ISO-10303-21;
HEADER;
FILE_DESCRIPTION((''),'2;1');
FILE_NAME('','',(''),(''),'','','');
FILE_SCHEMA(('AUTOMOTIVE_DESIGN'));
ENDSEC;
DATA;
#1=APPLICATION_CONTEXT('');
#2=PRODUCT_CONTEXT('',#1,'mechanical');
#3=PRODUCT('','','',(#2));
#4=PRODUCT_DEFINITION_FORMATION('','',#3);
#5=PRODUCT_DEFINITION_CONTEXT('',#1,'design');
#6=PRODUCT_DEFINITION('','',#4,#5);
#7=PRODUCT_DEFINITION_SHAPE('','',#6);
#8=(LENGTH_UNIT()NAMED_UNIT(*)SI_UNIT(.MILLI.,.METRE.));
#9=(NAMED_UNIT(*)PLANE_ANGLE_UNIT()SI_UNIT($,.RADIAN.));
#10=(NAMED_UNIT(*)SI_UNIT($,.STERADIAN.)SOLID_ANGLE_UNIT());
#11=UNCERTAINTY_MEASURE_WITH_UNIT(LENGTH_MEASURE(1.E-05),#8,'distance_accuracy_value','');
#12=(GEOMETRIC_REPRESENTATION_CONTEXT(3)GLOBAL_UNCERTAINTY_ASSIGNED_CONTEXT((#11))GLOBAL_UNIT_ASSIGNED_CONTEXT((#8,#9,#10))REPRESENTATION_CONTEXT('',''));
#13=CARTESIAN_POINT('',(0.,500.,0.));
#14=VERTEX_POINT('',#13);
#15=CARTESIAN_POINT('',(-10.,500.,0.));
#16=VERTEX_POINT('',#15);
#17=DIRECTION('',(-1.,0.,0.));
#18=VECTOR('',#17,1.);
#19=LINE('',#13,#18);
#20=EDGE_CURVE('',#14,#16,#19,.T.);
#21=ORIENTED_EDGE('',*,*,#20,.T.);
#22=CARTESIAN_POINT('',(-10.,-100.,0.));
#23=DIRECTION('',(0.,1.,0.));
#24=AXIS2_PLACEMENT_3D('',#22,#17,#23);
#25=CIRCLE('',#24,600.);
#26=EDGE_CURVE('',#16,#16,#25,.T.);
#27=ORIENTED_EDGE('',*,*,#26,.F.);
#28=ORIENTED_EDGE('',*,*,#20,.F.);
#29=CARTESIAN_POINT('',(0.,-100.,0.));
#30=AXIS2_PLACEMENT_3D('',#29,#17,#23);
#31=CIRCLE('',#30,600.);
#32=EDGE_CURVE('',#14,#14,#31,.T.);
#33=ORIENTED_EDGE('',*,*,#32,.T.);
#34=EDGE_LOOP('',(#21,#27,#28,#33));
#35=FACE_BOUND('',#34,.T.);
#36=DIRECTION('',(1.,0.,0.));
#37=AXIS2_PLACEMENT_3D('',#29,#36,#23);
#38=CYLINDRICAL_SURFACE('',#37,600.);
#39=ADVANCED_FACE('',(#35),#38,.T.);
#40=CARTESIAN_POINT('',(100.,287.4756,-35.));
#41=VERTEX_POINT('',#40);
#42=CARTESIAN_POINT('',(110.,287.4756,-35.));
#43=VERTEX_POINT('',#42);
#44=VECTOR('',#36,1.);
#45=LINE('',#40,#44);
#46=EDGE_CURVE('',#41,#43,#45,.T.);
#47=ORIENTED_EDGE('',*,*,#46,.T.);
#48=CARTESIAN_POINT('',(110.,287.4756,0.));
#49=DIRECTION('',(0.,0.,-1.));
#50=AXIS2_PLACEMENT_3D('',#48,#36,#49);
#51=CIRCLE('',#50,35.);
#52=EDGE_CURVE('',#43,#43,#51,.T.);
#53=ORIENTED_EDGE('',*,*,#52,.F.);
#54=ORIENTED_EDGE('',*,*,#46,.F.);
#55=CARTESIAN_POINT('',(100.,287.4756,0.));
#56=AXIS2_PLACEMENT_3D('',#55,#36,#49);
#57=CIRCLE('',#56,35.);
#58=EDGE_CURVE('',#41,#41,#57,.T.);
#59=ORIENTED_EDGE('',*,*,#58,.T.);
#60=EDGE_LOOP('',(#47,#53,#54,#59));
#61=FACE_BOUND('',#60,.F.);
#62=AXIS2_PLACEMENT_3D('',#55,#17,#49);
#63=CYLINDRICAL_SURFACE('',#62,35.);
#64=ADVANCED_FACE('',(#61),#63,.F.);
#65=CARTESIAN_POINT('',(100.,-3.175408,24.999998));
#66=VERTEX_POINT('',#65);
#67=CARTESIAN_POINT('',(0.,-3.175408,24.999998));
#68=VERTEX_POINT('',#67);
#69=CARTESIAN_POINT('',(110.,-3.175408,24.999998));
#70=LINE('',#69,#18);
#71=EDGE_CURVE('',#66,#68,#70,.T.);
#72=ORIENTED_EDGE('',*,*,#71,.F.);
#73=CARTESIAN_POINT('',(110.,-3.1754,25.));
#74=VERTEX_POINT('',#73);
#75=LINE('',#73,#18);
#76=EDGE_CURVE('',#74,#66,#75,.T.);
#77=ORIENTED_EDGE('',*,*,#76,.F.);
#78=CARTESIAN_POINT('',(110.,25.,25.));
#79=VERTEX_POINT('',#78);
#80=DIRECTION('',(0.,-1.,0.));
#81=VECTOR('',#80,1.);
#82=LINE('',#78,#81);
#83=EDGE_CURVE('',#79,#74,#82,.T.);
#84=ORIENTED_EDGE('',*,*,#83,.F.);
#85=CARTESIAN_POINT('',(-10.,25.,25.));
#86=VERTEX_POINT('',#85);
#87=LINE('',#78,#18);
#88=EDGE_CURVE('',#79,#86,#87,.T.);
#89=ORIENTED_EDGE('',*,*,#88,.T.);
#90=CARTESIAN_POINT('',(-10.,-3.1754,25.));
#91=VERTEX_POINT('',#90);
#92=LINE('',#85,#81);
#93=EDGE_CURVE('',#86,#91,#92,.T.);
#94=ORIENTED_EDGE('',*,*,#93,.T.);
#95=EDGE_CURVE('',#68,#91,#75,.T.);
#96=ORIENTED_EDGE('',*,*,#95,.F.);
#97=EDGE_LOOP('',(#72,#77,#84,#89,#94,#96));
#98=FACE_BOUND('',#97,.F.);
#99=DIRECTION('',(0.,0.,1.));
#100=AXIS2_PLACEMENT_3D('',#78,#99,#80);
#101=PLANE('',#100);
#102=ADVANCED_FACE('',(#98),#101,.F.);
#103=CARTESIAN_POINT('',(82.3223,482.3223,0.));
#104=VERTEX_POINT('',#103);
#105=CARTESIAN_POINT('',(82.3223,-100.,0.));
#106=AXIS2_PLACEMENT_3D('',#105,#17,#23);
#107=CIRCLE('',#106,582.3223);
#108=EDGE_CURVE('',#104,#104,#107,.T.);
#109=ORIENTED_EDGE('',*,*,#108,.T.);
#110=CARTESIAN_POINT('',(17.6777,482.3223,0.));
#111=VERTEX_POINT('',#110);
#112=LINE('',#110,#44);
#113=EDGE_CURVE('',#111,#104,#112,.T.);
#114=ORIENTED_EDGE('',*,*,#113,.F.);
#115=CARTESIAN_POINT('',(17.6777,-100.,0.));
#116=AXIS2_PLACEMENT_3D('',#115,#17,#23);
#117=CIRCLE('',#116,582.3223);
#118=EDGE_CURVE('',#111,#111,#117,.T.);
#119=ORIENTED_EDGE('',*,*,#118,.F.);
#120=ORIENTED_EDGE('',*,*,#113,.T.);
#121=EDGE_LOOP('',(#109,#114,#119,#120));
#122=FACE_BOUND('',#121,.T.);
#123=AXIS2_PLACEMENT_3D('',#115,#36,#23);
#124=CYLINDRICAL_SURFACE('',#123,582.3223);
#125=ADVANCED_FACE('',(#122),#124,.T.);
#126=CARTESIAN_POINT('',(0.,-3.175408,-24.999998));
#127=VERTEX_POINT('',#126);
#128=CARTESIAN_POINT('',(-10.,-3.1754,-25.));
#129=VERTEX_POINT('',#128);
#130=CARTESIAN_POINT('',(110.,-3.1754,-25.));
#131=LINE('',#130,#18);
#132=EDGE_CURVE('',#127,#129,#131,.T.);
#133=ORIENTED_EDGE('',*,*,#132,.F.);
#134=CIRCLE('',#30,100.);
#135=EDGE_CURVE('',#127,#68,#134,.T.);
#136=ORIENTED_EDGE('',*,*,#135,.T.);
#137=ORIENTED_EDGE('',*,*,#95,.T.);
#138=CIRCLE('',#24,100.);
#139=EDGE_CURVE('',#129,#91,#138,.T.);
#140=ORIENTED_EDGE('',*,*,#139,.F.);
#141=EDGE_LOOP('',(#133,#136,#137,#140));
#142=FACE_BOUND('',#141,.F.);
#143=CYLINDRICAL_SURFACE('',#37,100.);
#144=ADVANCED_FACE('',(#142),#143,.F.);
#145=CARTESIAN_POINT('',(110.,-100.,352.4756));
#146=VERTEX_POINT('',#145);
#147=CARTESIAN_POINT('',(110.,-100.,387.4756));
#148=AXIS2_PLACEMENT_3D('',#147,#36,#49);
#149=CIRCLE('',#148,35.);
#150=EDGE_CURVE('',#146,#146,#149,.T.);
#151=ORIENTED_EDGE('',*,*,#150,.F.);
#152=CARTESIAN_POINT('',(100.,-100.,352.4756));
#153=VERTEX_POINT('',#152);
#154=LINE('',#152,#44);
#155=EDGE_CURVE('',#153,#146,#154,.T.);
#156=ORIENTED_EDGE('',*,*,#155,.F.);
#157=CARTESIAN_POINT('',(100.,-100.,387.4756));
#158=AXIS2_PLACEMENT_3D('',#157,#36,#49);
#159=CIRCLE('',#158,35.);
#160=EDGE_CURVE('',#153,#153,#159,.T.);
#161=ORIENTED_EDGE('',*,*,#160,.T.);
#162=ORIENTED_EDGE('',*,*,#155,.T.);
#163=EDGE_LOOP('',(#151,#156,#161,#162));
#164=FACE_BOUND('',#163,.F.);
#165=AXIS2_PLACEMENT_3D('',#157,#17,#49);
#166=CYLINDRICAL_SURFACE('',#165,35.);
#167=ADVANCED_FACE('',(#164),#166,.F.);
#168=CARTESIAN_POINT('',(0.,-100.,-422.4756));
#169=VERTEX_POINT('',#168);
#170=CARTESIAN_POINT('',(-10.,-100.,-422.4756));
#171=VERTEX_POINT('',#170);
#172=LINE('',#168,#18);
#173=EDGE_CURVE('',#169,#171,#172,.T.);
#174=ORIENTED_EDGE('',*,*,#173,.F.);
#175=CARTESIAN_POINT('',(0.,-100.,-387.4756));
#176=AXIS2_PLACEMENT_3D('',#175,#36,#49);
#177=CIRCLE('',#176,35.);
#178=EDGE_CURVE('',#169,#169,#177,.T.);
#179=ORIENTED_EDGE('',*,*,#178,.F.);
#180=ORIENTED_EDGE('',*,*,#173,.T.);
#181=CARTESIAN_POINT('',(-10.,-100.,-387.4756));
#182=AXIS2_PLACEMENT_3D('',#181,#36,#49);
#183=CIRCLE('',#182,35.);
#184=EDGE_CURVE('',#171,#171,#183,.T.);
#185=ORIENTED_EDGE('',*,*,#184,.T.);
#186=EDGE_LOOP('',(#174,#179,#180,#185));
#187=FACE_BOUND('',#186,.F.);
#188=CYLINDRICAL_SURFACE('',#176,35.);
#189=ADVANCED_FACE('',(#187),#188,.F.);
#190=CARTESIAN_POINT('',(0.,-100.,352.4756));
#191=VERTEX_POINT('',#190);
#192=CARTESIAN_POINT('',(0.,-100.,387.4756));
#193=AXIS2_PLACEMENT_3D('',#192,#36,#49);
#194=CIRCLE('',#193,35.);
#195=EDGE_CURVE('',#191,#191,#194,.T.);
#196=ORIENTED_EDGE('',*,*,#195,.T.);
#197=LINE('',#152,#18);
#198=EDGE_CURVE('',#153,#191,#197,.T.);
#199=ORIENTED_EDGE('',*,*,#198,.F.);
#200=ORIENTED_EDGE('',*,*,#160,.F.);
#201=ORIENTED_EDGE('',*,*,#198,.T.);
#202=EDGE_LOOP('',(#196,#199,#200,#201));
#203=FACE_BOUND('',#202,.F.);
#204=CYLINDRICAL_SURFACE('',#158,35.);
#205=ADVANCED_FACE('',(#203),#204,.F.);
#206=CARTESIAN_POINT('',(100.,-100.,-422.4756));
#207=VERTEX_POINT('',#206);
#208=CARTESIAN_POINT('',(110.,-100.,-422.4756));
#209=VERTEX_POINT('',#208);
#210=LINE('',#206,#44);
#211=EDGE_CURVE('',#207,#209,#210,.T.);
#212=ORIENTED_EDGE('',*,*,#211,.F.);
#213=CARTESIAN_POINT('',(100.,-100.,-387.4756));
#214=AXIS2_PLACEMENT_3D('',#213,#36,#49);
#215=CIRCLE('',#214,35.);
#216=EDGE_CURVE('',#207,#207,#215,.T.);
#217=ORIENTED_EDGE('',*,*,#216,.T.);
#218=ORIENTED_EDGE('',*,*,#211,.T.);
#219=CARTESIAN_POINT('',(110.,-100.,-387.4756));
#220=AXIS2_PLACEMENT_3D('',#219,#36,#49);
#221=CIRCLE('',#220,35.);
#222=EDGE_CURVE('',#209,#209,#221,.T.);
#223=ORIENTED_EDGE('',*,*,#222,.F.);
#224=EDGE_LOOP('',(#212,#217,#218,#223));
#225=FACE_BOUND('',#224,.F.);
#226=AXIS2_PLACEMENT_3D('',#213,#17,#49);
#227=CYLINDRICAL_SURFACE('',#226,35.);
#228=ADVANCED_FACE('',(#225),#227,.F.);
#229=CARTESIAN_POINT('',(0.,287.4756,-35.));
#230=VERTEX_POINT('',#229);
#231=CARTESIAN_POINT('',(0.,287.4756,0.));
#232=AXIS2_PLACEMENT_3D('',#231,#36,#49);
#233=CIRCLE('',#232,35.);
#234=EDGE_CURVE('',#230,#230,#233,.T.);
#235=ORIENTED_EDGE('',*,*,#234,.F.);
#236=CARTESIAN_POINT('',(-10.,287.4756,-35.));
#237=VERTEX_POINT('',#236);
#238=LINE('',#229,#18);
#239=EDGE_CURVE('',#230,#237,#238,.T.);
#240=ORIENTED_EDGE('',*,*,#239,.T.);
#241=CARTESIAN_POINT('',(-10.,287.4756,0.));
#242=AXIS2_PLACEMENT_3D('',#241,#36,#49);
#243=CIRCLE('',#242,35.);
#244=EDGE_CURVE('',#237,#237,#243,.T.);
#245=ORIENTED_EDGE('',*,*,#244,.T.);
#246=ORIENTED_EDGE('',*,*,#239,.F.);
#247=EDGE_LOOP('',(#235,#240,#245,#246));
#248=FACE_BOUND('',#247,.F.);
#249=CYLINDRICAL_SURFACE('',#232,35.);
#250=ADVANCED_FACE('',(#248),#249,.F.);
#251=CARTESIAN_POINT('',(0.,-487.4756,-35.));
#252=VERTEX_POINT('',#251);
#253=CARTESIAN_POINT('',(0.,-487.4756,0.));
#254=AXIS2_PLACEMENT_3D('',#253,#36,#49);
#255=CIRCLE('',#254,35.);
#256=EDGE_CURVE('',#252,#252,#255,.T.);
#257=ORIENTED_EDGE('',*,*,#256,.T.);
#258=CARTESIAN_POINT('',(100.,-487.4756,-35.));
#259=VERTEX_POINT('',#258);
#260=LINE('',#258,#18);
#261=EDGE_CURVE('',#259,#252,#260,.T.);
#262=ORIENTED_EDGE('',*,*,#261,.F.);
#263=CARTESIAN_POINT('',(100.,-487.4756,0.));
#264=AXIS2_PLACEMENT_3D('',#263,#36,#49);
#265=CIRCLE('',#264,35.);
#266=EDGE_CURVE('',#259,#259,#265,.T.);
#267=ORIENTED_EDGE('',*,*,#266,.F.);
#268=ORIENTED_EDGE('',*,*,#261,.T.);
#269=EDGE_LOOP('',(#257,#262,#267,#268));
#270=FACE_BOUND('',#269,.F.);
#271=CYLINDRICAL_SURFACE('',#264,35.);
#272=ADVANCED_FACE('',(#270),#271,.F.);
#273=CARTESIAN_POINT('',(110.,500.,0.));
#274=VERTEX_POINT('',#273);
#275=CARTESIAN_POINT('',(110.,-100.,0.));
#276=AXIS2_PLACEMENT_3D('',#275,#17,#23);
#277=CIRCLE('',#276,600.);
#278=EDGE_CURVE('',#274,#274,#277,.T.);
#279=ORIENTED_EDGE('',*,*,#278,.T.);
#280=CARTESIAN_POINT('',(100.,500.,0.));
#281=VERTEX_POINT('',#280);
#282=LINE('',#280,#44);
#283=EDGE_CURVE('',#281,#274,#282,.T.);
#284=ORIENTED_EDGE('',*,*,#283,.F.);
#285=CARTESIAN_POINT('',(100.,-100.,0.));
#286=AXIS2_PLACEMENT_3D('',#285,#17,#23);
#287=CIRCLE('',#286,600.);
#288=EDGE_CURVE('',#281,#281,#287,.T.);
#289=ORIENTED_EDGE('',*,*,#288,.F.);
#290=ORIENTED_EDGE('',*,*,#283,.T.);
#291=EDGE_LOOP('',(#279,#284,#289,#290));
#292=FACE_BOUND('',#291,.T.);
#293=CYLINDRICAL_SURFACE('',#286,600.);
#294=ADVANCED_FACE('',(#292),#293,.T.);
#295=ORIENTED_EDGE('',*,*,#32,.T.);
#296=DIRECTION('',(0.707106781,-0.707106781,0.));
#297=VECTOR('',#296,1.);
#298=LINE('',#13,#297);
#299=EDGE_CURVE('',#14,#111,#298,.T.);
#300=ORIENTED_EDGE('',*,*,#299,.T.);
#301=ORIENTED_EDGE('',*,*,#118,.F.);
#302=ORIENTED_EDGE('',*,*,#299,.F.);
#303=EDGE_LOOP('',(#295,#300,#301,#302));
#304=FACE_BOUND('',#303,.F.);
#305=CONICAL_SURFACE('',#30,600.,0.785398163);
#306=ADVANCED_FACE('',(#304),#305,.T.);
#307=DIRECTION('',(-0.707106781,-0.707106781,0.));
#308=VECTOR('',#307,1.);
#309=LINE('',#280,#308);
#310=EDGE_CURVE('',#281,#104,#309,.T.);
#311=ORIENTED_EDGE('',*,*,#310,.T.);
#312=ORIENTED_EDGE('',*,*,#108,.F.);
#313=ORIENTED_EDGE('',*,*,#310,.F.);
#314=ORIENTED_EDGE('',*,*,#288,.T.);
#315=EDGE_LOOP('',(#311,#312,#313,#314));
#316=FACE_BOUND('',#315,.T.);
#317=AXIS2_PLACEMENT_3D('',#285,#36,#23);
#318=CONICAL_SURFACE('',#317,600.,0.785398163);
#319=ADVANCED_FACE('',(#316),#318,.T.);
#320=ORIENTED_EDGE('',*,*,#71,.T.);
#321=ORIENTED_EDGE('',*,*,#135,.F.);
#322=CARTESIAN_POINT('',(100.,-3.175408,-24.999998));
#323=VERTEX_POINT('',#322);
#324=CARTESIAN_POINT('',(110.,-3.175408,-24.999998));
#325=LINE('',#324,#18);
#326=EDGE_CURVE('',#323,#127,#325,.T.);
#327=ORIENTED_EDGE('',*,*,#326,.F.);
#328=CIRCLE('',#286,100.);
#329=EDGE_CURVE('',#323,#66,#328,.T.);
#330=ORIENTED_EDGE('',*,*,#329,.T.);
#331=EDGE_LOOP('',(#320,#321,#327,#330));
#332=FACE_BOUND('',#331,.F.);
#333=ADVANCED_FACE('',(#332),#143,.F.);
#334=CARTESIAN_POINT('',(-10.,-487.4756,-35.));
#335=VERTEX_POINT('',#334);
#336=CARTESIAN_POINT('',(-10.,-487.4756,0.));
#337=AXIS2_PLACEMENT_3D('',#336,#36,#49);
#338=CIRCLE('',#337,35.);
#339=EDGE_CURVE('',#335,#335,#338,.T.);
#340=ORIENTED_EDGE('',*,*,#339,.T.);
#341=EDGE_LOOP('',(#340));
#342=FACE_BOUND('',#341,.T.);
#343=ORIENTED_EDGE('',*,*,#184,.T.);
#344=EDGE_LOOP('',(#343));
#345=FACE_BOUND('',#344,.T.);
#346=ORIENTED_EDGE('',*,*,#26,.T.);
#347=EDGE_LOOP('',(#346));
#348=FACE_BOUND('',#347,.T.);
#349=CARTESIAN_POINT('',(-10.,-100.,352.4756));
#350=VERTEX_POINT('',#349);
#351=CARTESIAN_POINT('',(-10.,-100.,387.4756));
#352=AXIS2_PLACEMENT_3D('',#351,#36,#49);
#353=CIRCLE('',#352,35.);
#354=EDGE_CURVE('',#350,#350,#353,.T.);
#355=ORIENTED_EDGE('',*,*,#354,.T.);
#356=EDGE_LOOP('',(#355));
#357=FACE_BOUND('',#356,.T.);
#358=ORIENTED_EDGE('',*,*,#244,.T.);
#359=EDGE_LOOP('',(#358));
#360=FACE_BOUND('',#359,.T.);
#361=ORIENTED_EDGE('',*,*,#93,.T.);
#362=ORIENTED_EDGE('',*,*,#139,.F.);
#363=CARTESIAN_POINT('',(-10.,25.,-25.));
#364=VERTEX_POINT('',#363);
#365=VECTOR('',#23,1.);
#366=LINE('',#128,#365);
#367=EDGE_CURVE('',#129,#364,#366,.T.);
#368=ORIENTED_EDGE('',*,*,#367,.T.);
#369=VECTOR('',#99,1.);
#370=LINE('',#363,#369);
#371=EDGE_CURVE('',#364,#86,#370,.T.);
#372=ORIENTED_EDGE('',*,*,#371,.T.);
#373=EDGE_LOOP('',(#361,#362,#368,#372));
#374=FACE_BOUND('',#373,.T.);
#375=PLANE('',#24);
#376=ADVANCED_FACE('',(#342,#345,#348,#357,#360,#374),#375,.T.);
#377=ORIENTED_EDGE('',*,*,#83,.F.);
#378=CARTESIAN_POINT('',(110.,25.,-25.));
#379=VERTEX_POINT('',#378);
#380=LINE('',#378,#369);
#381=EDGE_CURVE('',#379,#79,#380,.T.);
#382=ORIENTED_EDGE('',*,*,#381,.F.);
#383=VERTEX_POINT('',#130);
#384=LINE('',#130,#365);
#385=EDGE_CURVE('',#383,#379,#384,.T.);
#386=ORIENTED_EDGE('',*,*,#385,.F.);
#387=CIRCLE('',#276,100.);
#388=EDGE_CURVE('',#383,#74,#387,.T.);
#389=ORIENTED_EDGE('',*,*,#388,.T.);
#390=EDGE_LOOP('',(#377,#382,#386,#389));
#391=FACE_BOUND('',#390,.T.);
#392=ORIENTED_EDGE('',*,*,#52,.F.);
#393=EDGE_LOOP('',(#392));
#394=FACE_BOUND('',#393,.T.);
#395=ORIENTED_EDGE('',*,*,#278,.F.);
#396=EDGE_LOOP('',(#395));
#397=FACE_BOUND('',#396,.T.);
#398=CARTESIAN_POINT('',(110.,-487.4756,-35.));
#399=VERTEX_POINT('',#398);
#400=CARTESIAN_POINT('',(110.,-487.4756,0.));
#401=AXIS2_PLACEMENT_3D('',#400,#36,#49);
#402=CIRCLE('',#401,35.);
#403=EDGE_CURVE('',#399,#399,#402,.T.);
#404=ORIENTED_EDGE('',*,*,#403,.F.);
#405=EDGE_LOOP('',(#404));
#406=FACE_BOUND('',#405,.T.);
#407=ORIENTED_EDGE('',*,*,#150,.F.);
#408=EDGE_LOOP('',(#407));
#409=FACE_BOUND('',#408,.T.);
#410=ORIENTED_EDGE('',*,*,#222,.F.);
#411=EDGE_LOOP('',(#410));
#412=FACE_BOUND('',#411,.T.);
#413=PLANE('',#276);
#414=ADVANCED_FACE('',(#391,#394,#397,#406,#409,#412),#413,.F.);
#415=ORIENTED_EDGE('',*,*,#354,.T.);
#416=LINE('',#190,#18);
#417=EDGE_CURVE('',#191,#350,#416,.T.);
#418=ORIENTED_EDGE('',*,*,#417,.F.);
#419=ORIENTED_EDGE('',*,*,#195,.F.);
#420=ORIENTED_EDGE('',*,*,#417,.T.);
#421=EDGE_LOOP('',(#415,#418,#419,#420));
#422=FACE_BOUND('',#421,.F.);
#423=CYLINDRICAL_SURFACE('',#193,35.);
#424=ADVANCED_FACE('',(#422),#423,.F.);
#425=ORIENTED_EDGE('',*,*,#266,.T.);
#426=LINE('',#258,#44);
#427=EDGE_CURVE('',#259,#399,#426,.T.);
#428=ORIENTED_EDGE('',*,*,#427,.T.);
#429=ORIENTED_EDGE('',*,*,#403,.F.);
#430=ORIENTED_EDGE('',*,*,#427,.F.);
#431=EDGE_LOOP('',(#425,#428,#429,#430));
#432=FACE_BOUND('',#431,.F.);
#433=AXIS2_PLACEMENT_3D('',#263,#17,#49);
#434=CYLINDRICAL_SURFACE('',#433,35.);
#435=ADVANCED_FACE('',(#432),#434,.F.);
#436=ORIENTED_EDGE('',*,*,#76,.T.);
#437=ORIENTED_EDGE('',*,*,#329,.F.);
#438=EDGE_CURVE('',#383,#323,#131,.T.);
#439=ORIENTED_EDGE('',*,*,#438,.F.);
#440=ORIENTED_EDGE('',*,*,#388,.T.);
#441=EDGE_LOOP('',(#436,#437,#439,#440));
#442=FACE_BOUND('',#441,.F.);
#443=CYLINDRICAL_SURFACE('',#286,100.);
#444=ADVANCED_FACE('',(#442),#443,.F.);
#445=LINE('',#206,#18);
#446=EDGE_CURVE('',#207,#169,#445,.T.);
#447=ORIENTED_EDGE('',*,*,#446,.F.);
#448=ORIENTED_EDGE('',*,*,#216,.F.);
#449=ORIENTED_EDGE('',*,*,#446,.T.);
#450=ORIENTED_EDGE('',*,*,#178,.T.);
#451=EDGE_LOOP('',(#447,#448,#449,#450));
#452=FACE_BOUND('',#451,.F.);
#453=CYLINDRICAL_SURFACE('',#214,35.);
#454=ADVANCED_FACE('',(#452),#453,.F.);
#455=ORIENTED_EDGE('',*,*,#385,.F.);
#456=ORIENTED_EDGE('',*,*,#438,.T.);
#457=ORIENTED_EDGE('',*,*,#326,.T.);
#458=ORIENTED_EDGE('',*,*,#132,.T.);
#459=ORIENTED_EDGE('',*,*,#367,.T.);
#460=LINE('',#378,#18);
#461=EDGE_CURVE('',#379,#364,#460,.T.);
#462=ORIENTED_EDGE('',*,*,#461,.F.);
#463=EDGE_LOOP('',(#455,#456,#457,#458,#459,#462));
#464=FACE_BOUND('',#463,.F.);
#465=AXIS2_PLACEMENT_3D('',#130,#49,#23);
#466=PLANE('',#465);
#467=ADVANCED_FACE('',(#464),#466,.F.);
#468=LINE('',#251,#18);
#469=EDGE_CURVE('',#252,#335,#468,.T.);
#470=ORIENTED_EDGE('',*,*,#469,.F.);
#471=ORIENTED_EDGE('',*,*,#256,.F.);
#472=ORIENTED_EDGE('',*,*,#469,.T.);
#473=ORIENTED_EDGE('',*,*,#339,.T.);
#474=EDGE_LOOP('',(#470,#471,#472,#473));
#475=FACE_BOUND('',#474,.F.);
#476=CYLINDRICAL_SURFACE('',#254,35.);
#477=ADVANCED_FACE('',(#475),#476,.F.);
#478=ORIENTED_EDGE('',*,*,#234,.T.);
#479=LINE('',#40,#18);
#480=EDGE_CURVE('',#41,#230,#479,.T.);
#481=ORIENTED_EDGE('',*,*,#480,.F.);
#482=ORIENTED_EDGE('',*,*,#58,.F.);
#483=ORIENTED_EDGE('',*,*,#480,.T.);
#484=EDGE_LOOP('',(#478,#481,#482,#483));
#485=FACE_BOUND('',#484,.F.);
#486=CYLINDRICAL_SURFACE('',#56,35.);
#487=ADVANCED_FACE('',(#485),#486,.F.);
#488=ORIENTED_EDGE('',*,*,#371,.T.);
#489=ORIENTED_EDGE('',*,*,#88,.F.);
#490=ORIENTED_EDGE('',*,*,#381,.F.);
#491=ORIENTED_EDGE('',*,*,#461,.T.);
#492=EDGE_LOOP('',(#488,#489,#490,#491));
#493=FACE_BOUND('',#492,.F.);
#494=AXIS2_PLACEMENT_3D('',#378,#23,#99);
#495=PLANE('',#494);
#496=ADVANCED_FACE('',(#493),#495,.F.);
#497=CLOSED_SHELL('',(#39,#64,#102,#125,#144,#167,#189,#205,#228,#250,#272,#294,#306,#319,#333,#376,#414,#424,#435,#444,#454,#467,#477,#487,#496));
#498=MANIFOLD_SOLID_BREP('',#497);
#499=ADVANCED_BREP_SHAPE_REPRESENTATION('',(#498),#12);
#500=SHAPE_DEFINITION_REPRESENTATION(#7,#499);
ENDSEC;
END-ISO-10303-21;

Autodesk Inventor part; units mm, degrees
ref_plane "YZ Plane" through (0, 0, 0) normal (1, 0, 0) x (0, 1, 0)
ref_plane "XZ Plane" through (0, 0, 0) normal (0, 1, 0) x (-1, 0, 0)
ref_plane "XY Plane" through (0, 0, 0) normal (0, 0, 1) x (1, 0, 0)
sketch "Boceto1" plane through (0, 0, 0) normal (0, 0, 1) x (1, 0, 0)
  line L0 (0, 0) -> (100, 0)
  line L1 (100, 0) -> (100, 500)
  line L2 (0, 500) -> (0, 0)
  line L3 (0, 500) -> (17.6777, 482.3223)
  line L4 (100, 500) -> (82.3223, 482.3223)
  line L5 (17.6777, 482.3223) -> (82.3223, 482.3223)
  line L6 (50, -100) -> (-150, -100)
revolve "Revolución1" add sketch "Boceto1" angle 360 about axis through (50, -100, 0) along (-1, 0, 0)
sketch "Boceto2" plane through (100, -100, 0) normal (1, 0, 0) x (0, 0, -1)
  circle A0 centre (0, 0) radius 600 construction
  circle A1 centre (-387.4756, 0) radius 35
  circle A2 centre (0, 0) radius 100 construction
  circle A3 centre (0, -387.4756) radius 35
  circle A4 centre (387.4756, 0) radius 35
  circle A5 centre (0, 387.4756) radius 35
  point P0 (0, 100)
  dimension "d13" = 360
extrude "Extrusión1" cut sketch "Boceto2" against normal through all
thicken "Engrosado1" operation add thickness 10 both sides no extend neighbours no toward (1, 0, 0) faces at (100, -375.8968, 274.6836)
thicken "Engrosado2" operation add thickness 10 both sides no extend neighbours no toward (-1, 0, 0) faces at (0, -375.8968, 274.6836)
sketch "Boceto3" plane through (110, -100, 0) normal (1, 0, 0) x (0, 0, -1)
  line L0 (25, 96.8246) -> (25, 125)
  line L1 (25, 125) -> (-25, 125)
  line L2 (-25, 125) -> (-25, 96.8246)
  line L3 (0, 100) -> (25, 125) construction
  line L4 (0, 100) -> (-25, 125) construction
  arc A0 (25, 96.8246) -> (-25, 96.8246) centre (0, 0) ccw
  point P0 (0, 100)
extrude "Extrusión2" cut sketch "Boceto3" against normal blind 120
sketch "Boceto4" plane through (110, -100, 0) normal (1, 0, 0) x (0, 0, -1)
  point P0 (0, 100)
properties part number "Polea_EjercicioClase"
